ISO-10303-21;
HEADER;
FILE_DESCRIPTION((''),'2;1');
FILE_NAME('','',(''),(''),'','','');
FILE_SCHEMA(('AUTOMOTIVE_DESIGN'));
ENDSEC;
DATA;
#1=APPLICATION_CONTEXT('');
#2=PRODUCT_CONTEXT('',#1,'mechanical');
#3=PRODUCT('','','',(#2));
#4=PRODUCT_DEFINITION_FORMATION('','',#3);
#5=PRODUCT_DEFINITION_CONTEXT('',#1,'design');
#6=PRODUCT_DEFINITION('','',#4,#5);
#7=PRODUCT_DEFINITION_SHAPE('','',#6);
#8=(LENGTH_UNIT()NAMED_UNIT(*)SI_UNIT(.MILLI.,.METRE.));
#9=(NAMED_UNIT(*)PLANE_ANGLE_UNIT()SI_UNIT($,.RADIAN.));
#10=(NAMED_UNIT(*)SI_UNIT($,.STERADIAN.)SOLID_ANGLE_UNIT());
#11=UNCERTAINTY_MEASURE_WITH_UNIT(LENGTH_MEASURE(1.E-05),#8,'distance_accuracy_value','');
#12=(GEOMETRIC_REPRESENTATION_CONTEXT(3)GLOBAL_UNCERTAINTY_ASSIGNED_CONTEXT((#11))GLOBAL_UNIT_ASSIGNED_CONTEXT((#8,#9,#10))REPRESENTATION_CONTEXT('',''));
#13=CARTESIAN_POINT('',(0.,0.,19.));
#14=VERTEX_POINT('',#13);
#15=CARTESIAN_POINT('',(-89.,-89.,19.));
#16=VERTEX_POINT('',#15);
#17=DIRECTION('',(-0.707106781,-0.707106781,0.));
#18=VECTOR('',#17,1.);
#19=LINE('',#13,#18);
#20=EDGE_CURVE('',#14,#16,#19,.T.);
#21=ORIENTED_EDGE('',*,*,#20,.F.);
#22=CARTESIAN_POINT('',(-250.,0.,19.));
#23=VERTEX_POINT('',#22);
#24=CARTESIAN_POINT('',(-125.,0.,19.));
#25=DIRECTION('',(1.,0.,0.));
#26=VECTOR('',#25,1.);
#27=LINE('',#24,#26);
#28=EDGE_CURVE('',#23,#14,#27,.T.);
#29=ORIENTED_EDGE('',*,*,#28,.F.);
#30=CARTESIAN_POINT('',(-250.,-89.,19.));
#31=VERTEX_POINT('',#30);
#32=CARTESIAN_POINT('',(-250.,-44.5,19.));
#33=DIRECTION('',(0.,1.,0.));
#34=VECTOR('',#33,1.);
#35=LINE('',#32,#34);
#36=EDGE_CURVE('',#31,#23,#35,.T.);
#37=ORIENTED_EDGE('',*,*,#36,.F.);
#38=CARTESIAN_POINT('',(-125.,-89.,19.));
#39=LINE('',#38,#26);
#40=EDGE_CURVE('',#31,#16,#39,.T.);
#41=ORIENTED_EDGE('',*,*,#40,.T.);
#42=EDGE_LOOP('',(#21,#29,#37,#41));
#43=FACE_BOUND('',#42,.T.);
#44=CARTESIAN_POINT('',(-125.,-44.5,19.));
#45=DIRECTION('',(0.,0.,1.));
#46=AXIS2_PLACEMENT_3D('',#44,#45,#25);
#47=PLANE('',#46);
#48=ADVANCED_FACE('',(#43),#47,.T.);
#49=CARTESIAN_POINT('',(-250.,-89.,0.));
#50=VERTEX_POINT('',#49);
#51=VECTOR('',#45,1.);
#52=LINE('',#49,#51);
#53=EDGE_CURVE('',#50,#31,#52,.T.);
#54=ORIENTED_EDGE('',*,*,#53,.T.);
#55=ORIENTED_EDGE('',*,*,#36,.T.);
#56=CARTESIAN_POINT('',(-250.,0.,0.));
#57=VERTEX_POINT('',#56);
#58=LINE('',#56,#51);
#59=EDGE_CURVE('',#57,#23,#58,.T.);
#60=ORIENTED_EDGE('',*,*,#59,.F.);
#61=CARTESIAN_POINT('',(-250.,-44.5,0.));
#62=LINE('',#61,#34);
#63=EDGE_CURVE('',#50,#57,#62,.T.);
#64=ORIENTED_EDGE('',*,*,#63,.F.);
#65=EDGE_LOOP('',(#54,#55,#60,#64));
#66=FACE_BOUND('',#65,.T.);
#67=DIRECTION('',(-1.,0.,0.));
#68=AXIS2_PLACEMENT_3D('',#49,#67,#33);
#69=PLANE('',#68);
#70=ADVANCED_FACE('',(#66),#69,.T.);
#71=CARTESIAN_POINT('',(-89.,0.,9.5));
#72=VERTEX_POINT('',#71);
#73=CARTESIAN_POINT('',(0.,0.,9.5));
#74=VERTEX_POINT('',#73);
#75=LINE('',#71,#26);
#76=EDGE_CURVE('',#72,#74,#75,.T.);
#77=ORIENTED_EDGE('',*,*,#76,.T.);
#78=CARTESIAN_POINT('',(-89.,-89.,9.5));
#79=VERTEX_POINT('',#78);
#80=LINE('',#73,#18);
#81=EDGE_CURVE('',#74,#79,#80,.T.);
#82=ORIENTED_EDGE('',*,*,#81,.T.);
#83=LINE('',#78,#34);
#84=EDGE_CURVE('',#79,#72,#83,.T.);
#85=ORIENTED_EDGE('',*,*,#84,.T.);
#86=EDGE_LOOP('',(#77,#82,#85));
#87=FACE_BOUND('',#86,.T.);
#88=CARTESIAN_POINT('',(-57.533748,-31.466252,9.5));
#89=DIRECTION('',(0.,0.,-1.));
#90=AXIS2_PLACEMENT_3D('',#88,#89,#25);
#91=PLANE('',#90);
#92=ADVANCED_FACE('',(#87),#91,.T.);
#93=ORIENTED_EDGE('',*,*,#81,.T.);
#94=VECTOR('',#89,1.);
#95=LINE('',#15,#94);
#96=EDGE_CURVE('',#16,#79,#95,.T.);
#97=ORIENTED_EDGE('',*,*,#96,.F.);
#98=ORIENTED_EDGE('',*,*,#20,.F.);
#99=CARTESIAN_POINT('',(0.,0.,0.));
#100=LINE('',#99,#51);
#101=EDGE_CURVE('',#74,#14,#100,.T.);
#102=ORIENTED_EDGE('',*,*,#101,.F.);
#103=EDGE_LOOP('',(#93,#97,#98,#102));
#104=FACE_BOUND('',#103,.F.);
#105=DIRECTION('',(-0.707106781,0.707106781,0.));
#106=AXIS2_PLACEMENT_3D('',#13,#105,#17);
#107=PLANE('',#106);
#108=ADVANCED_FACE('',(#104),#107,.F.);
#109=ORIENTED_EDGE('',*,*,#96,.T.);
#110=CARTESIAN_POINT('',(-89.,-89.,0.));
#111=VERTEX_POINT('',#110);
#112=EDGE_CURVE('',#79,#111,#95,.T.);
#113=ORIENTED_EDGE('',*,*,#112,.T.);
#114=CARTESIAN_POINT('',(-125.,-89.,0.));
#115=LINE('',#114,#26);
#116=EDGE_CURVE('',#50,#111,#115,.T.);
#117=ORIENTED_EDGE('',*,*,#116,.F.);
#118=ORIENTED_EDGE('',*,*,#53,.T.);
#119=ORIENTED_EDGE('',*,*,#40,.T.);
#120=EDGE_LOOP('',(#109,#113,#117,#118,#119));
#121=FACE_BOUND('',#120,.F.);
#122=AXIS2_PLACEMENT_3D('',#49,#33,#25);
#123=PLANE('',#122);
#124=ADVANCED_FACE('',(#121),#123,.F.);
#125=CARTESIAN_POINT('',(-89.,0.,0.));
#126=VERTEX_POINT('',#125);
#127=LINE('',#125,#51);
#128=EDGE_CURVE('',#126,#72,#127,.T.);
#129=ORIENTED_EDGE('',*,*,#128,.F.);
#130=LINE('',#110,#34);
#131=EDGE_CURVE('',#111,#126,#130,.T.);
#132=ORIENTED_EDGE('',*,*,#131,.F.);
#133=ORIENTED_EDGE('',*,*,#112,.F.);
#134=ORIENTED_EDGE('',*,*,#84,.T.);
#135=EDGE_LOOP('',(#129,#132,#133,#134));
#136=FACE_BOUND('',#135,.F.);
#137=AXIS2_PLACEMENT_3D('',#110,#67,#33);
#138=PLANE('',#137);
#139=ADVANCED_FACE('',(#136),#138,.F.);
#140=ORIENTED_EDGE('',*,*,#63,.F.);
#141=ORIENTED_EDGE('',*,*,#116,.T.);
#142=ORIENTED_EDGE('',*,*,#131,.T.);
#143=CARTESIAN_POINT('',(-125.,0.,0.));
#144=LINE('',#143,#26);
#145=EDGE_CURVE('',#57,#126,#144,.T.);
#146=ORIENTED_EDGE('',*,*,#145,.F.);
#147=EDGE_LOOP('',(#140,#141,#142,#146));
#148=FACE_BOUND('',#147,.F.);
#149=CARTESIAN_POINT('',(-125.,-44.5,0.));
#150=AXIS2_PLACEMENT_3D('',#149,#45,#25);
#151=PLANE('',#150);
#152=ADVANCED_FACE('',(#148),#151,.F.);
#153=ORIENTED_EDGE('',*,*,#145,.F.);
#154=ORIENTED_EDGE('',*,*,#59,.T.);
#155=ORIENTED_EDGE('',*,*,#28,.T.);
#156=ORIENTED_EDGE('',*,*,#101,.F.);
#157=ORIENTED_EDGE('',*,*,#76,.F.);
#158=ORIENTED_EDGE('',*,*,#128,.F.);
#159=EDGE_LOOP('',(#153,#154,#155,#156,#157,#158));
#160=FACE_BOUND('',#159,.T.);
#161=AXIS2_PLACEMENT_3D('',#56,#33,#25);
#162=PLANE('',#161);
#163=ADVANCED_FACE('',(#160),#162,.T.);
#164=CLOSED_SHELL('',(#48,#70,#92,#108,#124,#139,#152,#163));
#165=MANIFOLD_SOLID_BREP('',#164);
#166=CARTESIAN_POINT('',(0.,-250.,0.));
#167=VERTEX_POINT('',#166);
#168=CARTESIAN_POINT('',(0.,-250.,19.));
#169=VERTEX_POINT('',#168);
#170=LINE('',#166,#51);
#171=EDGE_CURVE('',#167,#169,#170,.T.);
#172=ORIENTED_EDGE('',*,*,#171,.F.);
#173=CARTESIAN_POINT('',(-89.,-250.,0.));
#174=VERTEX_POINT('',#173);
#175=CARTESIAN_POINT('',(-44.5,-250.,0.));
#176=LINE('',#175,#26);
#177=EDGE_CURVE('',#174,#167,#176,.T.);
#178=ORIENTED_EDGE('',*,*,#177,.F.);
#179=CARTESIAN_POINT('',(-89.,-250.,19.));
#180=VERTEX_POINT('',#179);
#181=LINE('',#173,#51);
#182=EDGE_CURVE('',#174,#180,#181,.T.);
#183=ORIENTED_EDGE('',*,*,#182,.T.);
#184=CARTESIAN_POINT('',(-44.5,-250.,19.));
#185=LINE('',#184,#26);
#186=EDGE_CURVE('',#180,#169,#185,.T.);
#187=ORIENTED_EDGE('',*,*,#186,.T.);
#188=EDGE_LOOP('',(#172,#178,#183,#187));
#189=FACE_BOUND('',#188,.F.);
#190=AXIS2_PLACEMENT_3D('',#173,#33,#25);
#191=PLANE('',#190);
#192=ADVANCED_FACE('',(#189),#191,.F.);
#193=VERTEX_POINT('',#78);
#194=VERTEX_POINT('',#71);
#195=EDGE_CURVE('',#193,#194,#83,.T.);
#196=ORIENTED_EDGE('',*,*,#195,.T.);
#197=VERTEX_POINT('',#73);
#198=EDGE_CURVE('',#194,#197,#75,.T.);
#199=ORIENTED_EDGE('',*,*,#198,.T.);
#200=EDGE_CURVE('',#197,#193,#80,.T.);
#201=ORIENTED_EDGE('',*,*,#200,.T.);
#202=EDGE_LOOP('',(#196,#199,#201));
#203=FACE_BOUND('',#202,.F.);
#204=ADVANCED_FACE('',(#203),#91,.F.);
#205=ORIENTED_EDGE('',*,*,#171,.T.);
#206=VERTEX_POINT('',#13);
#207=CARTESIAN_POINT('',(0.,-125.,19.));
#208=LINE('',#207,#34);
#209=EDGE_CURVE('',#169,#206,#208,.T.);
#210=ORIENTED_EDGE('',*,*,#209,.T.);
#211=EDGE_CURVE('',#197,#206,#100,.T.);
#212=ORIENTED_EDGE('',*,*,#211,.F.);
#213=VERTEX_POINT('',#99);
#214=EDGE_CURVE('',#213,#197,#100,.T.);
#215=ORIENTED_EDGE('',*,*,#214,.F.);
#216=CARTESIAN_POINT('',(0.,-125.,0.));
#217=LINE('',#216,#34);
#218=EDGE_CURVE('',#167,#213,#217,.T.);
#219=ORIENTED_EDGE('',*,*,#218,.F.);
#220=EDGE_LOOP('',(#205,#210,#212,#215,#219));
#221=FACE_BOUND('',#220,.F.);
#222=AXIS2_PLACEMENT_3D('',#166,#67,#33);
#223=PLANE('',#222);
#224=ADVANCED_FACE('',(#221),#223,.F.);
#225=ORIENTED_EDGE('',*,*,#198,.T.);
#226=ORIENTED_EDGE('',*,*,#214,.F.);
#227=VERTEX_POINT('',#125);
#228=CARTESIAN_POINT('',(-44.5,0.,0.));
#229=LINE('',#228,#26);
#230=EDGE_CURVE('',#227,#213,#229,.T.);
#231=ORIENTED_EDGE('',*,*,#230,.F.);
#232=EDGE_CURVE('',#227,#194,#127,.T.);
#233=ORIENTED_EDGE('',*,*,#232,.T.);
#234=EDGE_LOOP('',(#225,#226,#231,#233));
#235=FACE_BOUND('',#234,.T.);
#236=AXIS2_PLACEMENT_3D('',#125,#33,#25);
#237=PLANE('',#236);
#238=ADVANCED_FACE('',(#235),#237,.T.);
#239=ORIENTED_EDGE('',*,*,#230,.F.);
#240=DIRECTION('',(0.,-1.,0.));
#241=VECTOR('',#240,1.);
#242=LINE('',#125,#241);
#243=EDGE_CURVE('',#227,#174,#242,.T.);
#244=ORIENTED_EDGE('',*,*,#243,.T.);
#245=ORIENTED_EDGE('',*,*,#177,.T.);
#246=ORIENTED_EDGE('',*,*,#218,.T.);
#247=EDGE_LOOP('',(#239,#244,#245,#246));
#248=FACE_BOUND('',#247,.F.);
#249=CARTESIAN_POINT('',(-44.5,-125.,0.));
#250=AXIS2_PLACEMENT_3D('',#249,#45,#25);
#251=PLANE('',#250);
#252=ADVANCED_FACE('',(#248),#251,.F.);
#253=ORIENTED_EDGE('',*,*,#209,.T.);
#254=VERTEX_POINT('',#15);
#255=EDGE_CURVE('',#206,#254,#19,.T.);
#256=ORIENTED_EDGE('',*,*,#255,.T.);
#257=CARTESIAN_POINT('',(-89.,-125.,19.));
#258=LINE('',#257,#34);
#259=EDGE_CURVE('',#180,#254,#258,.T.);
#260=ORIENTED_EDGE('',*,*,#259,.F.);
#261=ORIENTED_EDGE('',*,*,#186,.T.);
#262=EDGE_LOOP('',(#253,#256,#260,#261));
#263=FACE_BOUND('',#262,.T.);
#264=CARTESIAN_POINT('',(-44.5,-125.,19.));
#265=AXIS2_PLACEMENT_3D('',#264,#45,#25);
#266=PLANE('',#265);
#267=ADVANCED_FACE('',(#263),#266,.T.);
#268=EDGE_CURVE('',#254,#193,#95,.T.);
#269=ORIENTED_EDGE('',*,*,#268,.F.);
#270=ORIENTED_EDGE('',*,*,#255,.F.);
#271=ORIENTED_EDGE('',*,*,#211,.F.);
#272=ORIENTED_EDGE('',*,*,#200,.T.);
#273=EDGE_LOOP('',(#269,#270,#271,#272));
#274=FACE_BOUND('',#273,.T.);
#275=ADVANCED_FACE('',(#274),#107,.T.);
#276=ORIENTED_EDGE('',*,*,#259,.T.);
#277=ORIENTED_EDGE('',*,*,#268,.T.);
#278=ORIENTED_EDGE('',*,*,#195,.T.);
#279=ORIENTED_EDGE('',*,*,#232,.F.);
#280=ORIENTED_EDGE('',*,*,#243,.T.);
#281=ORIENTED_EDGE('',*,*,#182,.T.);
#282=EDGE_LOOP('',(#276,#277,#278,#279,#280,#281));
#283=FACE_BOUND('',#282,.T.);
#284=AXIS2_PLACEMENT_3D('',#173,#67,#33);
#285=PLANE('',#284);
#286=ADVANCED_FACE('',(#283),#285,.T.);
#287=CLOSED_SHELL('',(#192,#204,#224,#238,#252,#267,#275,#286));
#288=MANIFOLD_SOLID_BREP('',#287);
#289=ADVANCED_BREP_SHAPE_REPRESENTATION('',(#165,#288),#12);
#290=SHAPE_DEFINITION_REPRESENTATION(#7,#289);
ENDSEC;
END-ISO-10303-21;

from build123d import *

# Parameters (mm, degrees)
F0_W     = 250
F0_H     = 89
F1_DEPTH = 19
F2_W     = 89
F2_H     = 250
F3_DEPTH = 19
F5_DEPTH = 19.001
F7_DEPTH = 9.5


with BuildPart() as f1:
    # F0 (on Top) → F1 (new body)
    with BuildSketch(Plane.XY):
        with Locations((-125, -44.5)):
            Rectangle(F0_W, F0_H)
    extrude(amount=F1_DEPTH)

    # F4 (on face) → F5 (cut, through all)
    with BuildSketch(Plane.XY.offset(19)):
        Polygon((0, -89), (0, 0), (-89, -89), align=None)
    extrude(amount=-F5_DEPTH, mode=Mode.SUBTRACT)

    # F6 (on face) → F7 (cut)
    with BuildSketch(Plane(origin=(0, 0, 0), x_dir=(1, 0, 0), z_dir=(0, 0, -1))):
        Polygon((0, 0), (-89, 89), (-89, 0), align=None)
    extrude(amount=-F7_DEPTH, mode=Mode.SUBTRACT)


with BuildPart() as f3:
    # F2 (on Top) → F3 (new body)
    with BuildSketch(Plane.XY):
        with Locations((-44.5, -125)):
            Rectangle(F2_W, F2_H)
    extrude(amount=F3_DEPTH)

    # F8: cut F1
    add(f1.part, mode=Mode.SUBTRACT)


solid = Compound([f1.part, f3.part])
